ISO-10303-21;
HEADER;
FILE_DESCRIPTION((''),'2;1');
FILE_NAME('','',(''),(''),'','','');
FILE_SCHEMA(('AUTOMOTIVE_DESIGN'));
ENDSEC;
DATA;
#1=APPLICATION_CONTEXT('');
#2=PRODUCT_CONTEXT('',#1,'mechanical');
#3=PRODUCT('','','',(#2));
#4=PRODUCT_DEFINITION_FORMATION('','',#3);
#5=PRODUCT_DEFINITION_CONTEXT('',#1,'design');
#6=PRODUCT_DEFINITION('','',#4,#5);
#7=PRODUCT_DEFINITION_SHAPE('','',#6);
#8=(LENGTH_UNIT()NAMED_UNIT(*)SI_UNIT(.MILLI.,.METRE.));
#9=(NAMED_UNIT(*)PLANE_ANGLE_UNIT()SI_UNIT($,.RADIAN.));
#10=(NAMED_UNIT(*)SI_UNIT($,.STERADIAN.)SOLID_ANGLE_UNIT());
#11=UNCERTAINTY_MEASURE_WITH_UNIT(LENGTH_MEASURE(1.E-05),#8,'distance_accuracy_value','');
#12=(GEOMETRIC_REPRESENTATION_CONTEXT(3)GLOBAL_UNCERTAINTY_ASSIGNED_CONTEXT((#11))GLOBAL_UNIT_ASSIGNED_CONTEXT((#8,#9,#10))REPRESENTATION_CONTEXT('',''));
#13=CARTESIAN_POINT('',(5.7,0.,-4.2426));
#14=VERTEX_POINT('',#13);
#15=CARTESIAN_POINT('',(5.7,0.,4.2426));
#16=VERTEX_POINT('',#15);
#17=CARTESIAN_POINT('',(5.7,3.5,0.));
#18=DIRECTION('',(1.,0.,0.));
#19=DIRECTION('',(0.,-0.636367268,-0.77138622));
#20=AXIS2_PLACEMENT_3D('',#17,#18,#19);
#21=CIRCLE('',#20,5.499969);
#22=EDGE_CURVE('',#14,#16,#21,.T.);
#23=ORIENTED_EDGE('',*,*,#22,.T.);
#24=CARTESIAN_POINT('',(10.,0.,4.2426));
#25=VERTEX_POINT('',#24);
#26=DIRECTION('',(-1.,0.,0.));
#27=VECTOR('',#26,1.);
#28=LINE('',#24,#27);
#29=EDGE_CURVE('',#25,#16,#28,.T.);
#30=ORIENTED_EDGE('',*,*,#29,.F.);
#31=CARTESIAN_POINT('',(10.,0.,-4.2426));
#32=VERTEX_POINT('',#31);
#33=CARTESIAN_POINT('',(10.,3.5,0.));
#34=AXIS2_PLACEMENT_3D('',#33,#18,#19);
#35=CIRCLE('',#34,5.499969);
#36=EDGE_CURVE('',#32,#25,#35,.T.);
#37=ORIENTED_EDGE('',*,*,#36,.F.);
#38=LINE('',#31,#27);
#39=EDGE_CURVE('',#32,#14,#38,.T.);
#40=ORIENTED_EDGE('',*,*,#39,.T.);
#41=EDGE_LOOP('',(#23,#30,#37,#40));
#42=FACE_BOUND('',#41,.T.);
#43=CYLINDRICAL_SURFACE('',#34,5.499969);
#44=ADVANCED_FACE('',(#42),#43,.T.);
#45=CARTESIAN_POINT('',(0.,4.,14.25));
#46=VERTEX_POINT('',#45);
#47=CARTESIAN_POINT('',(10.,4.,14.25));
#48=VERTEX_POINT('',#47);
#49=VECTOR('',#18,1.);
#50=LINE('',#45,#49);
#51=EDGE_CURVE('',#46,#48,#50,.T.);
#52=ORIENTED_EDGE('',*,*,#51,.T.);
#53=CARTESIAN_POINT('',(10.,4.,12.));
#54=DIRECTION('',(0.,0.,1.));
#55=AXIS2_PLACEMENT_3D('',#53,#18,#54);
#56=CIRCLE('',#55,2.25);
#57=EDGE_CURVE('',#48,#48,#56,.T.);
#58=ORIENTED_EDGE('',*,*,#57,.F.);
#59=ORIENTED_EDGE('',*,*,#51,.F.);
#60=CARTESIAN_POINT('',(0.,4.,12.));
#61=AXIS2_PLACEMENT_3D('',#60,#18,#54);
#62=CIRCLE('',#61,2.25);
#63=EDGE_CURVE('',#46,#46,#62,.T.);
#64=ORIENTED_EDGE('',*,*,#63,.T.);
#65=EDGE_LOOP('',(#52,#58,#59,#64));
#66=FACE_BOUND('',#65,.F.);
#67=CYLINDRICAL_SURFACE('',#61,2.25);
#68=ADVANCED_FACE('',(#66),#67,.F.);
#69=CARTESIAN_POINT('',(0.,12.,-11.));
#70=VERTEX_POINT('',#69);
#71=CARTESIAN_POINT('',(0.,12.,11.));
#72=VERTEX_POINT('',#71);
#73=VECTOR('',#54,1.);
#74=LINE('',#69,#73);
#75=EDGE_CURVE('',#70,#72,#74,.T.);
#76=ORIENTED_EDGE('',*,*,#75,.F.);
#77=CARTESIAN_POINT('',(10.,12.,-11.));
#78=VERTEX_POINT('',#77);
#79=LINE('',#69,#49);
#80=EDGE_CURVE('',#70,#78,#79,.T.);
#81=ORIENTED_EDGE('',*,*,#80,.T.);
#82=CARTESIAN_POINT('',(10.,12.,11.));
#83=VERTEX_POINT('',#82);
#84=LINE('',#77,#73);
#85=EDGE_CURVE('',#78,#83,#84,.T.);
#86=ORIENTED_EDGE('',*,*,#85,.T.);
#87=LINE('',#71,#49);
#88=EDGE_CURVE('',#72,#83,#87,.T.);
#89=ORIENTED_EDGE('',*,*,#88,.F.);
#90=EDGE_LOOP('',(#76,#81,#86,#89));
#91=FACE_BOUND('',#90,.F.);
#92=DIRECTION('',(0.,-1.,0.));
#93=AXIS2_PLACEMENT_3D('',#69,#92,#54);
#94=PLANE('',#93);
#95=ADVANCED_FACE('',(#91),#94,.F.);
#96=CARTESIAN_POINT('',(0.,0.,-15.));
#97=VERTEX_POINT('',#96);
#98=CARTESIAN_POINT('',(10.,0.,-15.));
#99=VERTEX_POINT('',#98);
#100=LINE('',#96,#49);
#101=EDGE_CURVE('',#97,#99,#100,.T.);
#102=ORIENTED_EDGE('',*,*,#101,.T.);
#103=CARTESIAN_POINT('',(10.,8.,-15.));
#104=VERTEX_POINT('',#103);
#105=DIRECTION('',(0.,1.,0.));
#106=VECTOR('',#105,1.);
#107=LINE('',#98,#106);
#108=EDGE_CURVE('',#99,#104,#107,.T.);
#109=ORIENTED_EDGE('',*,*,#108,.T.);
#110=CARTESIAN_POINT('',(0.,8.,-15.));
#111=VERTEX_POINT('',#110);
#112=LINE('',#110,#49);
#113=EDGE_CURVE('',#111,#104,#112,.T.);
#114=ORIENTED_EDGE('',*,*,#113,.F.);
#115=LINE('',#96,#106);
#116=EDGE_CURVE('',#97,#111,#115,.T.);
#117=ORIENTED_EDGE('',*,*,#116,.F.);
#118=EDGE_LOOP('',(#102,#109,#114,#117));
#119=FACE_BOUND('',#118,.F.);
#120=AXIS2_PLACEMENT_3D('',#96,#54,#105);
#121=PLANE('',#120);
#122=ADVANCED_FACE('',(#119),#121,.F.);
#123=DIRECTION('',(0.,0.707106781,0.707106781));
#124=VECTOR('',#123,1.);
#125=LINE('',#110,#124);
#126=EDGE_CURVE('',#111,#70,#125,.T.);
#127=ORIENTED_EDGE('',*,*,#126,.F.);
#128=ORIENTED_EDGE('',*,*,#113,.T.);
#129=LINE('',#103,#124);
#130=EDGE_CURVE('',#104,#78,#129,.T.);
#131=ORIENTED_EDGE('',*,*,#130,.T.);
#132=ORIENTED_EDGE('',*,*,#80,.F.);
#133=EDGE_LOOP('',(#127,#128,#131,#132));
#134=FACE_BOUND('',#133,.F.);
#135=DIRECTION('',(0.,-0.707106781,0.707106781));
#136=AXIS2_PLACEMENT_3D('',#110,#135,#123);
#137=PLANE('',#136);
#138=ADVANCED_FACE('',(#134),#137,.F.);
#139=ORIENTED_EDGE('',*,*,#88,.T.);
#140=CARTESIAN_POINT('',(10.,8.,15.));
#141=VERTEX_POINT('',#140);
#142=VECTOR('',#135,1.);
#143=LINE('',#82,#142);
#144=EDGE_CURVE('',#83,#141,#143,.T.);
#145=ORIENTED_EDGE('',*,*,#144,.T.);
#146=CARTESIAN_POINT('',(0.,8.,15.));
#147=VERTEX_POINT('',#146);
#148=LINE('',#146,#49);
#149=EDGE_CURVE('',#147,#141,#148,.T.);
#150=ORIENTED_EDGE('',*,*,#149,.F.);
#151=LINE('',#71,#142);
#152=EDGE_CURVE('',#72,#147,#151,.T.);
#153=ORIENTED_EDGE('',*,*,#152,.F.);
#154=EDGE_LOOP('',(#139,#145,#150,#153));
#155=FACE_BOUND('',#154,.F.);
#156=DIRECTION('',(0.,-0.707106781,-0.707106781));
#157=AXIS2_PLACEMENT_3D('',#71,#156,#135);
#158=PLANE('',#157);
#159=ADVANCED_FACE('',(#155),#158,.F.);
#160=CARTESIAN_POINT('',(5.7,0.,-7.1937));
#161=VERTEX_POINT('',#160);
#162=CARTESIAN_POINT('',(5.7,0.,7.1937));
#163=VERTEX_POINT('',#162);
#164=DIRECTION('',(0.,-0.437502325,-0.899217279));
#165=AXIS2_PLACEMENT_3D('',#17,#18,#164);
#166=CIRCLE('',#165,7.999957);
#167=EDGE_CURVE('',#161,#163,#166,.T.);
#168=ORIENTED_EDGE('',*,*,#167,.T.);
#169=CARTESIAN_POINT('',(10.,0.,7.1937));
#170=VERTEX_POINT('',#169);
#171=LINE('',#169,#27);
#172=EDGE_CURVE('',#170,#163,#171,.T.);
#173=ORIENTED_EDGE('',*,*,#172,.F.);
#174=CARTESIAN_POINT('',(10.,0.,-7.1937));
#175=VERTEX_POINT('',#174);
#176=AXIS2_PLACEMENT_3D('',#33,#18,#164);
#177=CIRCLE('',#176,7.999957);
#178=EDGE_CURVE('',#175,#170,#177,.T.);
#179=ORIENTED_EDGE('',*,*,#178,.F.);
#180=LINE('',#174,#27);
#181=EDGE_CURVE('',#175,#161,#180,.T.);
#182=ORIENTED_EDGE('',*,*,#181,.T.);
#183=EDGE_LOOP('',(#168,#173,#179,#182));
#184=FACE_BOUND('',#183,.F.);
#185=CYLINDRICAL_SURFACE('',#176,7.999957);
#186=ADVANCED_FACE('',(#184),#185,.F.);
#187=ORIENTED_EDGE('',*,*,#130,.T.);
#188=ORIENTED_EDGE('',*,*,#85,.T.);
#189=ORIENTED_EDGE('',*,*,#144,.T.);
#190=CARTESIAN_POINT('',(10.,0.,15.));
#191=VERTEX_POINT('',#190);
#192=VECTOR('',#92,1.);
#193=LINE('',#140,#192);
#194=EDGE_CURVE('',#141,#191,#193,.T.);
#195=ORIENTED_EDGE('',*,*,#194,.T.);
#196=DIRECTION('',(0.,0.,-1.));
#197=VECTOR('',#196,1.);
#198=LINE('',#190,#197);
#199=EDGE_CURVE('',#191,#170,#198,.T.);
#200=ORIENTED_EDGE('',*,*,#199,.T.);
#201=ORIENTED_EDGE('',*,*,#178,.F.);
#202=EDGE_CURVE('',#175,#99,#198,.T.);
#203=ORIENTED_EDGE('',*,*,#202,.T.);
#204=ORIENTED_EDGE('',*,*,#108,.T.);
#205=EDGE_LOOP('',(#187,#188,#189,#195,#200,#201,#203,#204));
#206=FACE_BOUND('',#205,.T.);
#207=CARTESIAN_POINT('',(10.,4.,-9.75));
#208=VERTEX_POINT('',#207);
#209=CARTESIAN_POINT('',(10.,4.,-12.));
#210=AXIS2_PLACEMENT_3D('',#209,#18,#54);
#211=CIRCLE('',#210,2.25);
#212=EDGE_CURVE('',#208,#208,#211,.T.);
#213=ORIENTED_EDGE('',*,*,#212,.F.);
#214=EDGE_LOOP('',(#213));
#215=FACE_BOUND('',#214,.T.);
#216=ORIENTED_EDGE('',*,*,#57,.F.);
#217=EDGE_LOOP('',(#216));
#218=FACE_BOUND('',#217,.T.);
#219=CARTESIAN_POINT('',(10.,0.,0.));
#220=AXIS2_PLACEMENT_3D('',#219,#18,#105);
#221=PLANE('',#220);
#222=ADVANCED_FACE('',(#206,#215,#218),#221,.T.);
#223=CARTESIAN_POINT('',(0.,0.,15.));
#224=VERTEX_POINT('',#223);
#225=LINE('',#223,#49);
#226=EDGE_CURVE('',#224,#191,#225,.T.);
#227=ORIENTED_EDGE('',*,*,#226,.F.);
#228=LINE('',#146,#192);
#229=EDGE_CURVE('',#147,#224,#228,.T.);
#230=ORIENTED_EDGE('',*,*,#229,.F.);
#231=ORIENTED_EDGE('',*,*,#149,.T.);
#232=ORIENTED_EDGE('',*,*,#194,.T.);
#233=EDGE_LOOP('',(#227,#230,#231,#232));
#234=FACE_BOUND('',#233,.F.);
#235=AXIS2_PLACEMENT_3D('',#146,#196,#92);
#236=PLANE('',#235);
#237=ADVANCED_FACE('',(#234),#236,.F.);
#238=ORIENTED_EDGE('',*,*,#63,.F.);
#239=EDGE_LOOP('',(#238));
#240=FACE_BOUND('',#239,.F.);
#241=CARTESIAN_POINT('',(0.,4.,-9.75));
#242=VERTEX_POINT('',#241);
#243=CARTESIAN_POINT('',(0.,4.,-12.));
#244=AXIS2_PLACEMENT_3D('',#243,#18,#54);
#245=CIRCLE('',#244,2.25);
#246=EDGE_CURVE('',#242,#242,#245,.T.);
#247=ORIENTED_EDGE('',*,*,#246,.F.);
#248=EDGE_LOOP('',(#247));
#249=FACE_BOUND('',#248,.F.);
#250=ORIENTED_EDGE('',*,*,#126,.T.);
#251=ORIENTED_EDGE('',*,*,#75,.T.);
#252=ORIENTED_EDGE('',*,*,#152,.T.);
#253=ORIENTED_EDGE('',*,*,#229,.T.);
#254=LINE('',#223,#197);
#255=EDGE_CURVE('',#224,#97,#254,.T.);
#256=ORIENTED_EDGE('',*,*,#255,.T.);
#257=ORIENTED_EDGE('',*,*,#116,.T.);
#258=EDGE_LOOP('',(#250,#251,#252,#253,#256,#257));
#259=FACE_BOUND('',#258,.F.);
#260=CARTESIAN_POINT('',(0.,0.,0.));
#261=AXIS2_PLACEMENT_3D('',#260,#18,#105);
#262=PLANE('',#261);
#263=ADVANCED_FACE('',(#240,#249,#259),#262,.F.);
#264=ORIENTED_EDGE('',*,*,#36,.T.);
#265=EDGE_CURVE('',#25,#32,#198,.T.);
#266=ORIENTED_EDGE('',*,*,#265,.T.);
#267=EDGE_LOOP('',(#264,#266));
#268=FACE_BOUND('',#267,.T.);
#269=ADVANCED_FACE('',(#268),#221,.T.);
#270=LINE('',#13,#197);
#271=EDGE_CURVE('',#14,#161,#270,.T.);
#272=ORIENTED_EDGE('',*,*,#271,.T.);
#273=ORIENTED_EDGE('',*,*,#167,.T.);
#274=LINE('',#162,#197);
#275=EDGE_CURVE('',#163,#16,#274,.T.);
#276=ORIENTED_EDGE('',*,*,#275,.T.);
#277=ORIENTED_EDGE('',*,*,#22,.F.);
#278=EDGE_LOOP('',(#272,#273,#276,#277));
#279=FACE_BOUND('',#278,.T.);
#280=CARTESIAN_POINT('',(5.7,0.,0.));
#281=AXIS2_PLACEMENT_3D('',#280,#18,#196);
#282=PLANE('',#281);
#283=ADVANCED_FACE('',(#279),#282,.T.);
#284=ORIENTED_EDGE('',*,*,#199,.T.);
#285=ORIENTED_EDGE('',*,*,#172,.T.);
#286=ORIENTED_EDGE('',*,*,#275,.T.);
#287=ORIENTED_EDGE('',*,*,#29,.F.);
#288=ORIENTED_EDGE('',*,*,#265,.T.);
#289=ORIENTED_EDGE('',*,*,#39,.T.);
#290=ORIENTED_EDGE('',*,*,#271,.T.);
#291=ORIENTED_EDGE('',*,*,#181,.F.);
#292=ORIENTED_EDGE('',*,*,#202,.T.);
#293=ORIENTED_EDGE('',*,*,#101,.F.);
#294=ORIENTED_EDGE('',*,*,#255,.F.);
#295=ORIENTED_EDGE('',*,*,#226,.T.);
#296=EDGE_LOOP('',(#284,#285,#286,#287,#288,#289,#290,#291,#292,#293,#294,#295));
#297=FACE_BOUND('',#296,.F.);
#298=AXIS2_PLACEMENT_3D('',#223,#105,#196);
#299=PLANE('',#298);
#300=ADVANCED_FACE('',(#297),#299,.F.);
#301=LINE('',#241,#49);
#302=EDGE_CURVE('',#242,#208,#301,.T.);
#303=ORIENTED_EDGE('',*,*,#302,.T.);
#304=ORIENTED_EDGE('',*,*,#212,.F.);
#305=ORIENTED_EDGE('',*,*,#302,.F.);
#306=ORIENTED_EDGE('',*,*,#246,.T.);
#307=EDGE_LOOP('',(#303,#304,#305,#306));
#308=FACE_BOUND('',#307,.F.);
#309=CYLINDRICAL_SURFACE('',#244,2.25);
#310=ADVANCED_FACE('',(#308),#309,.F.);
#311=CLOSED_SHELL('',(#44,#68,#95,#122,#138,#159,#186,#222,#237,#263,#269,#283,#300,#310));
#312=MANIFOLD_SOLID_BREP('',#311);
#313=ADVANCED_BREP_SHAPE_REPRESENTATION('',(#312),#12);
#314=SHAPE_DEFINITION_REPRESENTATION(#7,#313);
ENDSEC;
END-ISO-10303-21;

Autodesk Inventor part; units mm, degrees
ref_plane "YZ Plane" through (0, 0, 0) normal (1, 0, 0) x (0, 1, 0)
ref_plane "XZ Plane" through (0, 0, 0) normal (0, 1, 0) x (-1, 0, 0)
ref_plane "XY Plane" through (0, 0, 0) normal (0, 0, 1) x (1, 0, 0)
sketch "Sketch1" plane through (0, 0, 0) normal (1, 0, 0) x (0, 1, 0)
  line L0 (12, 11) -> (8, 15)
  line L1 (8, 15) -> (0, 15)
  line L2 (0, 15) -> (0, -15)
  line L3 (8, -15) -> (12, -11)
  line L4 (12, -11) -> (12, 11)
  line L5 (0, -15) -> (8, -15)
extrude "Extrusion2" add sketch "Sketch1" along normal blind 10
sketch "Sketch2" plane through (10, 0, 0) normal (1, 0, 0) x (0, 0, -1)
  line L0 (4.2426, 0) -> (7.1937, 0)
  arc A0 (4.2426, 0) -> (-4.2426, 0) centre (0, 3.5) ccw
  arc A1 (7.1937, 0) -> (-7.1937, 0) centre (0, 3.5) ccw
  line L1 (-7.1937, 0) -> (-4.2426, 0)
extrude "Extrusion1" cut sketch "Sketch2" against normal blind 4.3
hole "Hole2" at (0, 4, -12) direction (1, 0, 0) diameter 4.5 depth 10
sketch "Sketch3" plane through (0, 0, 0) normal (1, 0, 0) x (0, 1, 0)
  point P0 (4, -12)
hole "Hole1" at (0, 4, 12) direction (1, 0, 0) diameter 4.5 depth 10
sketch "Sketch4" plane through (0, 0, 0) normal (1, 0, 0) x (0, 1, 0)
  point P0 (4, 12)
properties part number "Spreader Holder" material "ABS Plastic"
